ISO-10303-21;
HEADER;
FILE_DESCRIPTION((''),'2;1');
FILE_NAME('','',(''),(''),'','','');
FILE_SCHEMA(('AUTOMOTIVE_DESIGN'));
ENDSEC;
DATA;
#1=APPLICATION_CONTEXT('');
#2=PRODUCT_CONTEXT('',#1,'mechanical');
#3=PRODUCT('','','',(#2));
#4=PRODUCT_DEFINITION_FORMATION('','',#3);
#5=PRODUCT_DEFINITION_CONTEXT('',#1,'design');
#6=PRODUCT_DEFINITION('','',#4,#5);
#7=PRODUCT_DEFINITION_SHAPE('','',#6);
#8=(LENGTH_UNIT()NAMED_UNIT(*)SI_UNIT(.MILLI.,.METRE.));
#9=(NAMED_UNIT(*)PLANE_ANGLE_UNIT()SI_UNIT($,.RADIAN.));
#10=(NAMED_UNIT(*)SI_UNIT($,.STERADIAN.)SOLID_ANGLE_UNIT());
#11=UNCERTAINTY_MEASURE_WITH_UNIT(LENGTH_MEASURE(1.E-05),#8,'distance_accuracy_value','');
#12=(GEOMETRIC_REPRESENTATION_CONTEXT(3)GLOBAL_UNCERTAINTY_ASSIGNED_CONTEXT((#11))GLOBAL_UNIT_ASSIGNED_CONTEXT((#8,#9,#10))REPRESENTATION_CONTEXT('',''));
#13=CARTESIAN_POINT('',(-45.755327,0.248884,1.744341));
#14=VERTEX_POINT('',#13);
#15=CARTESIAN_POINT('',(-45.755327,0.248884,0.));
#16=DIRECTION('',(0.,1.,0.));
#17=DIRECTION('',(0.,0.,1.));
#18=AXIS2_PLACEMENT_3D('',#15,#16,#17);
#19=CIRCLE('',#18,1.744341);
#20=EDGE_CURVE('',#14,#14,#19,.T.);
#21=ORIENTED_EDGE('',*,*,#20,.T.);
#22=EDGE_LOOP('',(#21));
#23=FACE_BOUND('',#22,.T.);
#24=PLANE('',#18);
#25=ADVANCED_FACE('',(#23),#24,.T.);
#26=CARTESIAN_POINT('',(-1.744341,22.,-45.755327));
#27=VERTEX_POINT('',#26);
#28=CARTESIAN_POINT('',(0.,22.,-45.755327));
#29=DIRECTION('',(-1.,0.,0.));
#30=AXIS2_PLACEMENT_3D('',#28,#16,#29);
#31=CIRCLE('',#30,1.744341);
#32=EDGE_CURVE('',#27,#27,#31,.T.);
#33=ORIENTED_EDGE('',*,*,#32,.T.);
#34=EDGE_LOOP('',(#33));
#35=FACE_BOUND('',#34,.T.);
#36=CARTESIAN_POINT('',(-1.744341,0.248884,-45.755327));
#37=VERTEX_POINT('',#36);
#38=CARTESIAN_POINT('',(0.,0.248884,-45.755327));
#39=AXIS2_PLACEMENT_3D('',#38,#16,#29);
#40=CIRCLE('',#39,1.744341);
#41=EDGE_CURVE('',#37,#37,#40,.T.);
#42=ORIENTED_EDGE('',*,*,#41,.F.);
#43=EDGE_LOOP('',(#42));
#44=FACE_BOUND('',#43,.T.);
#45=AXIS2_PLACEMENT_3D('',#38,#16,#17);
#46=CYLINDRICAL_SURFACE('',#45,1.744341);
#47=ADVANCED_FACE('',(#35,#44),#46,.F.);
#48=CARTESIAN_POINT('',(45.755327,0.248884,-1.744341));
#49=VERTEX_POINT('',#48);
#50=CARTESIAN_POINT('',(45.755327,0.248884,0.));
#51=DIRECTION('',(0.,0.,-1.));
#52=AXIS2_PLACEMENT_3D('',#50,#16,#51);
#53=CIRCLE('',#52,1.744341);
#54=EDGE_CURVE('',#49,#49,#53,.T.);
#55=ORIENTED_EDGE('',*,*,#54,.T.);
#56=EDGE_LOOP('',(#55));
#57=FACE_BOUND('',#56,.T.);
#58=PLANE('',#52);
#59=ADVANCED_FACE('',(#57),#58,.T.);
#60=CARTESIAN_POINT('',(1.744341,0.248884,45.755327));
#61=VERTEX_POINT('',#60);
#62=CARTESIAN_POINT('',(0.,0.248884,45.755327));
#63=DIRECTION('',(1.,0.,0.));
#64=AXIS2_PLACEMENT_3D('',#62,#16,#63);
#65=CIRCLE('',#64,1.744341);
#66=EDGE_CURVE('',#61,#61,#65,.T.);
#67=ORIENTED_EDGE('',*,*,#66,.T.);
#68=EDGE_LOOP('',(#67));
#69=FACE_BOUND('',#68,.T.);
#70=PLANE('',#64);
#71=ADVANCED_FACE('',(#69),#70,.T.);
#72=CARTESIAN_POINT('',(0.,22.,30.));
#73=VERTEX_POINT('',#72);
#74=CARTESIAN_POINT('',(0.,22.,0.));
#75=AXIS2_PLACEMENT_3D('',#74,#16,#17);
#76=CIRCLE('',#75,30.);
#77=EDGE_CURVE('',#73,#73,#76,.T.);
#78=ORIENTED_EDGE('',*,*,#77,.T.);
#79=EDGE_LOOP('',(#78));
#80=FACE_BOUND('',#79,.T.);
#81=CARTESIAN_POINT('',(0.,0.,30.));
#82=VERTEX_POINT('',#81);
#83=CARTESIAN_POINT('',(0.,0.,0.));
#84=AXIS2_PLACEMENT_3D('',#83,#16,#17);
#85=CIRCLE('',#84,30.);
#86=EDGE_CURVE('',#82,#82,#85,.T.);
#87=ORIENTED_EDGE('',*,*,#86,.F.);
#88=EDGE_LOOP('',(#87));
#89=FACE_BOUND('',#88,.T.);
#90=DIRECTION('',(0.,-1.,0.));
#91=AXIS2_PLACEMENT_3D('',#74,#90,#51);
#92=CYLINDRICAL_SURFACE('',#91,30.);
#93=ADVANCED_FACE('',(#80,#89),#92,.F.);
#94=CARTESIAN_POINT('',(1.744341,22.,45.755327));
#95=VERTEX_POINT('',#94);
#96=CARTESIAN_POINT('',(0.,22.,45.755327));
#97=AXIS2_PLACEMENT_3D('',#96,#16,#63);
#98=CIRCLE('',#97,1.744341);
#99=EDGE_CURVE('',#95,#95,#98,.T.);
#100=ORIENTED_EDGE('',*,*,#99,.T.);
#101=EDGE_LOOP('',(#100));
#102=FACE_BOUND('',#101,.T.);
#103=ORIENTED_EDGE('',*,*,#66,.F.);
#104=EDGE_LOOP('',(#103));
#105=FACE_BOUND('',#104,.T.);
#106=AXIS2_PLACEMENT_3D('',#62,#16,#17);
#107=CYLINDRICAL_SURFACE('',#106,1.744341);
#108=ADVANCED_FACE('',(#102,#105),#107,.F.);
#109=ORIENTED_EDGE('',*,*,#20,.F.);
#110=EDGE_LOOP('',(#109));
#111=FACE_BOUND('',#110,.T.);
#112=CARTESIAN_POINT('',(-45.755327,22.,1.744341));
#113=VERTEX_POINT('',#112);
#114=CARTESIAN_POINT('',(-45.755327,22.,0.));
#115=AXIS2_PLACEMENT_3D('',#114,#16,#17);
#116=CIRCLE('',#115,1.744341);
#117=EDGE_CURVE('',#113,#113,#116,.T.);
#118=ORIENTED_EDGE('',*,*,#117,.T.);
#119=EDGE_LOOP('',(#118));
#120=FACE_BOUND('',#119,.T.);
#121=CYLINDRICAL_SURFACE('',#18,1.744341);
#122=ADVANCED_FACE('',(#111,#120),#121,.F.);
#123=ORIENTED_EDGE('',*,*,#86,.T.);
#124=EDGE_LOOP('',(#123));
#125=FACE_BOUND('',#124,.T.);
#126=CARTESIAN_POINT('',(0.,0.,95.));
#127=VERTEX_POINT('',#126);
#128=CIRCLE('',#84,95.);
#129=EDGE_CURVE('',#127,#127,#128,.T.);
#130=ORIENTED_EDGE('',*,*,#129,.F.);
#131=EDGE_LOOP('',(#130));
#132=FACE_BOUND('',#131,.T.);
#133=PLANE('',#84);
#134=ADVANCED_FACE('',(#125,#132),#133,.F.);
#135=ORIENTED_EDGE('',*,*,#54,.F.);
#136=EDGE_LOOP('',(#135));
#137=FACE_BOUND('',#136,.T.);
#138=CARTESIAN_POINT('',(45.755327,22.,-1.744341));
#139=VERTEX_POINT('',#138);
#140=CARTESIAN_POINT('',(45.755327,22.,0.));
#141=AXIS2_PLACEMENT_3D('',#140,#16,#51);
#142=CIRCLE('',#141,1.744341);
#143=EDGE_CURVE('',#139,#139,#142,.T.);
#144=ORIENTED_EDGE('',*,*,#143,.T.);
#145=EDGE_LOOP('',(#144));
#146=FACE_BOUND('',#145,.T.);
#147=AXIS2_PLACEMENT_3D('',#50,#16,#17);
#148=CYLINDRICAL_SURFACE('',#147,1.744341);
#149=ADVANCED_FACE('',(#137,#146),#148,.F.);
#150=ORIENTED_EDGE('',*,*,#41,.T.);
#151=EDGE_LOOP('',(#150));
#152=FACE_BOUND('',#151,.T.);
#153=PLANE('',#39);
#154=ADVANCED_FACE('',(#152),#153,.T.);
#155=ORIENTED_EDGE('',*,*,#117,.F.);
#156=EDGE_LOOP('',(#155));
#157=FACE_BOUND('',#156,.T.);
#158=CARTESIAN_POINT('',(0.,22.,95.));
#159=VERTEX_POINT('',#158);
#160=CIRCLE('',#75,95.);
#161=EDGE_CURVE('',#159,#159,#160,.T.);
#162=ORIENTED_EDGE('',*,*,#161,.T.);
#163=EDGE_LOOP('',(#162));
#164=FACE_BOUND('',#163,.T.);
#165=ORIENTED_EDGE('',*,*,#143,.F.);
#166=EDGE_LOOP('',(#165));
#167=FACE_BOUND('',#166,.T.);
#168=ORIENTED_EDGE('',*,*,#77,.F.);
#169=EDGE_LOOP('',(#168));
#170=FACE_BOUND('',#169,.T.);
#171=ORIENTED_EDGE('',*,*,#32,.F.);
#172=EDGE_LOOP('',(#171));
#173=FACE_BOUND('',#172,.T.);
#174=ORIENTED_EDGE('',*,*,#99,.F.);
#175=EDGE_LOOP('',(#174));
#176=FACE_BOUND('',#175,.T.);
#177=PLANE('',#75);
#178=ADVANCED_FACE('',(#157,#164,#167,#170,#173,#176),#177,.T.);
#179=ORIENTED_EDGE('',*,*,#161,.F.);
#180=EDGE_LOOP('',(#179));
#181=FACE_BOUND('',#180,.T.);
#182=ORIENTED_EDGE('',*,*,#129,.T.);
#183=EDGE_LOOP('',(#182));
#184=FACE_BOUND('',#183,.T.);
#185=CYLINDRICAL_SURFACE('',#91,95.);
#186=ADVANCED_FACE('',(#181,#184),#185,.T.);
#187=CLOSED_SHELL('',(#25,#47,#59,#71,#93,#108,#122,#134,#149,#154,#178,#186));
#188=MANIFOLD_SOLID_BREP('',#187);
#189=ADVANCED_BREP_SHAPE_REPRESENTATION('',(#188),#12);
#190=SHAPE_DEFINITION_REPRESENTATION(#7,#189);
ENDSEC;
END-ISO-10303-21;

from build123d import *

# Parameters (mm, degrees)
SKETCH1_R           = 95
BOSS_EXTRUDE1_DEPTH = 22
SKETCH2_R           = 30
CUT_EXTRUDE1_DEPTH  = 137.1396342
SKETCH3_R           = 1.744340812
CUT_EXTRUDE2_DEPTH  = 21.751116263
CIRPATTERN1_COUNT   = 4


with BuildPart() as part:
    # Sketch1 → Boss-Extrude1 (new body)
    with BuildSketch(Plane(origin=(0, 0, 0), x_dir=(1, 0, 0), z_dir=(0, 1, 0))):
        Circle(SKETCH1_R)
    extrude(amount=BOSS_EXTRUDE1_DEPTH)

    # Sketch2 → Cut-Extrude1 (cut, through all)
    with BuildSketch(Plane(origin=(0, 0, 0), x_dir=(1, 0, 0), z_dir=(0, 1, 0))):
        Circle(SKETCH2_R)
    extrude(amount=CUT_EXTRUDE1_DEPTH, mode=Mode.SUBTRACT)

    # Sketch3 → Cut-Extrude2 (cut)
    with BuildSketch(Plane(origin=(0, 22, 0), x_dir=(1, 0, 0), z_dir=(0, 1, 0))):
        with Locations((-45.755327196, 0)):
            Circle(SKETCH3_R)
    cut_extrude2 = extrude(amount=-CUT_EXTRUDE2_DEPTH, mode=Mode.SUBTRACT)

    # CirPattern1: Cut-Extrude2 ×4 about axis
    cirpattern1_axis = Axis((0, 0, 0), (0, 1, 0))
    for i in range(1, CIRPATTERN1_COUNT):
        add(cut_extrude2.rotate(cirpattern1_axis, i * 360 / CIRPATTERN1_COUNT), mode=Mode.SUBTRACT)


solid = part.part
